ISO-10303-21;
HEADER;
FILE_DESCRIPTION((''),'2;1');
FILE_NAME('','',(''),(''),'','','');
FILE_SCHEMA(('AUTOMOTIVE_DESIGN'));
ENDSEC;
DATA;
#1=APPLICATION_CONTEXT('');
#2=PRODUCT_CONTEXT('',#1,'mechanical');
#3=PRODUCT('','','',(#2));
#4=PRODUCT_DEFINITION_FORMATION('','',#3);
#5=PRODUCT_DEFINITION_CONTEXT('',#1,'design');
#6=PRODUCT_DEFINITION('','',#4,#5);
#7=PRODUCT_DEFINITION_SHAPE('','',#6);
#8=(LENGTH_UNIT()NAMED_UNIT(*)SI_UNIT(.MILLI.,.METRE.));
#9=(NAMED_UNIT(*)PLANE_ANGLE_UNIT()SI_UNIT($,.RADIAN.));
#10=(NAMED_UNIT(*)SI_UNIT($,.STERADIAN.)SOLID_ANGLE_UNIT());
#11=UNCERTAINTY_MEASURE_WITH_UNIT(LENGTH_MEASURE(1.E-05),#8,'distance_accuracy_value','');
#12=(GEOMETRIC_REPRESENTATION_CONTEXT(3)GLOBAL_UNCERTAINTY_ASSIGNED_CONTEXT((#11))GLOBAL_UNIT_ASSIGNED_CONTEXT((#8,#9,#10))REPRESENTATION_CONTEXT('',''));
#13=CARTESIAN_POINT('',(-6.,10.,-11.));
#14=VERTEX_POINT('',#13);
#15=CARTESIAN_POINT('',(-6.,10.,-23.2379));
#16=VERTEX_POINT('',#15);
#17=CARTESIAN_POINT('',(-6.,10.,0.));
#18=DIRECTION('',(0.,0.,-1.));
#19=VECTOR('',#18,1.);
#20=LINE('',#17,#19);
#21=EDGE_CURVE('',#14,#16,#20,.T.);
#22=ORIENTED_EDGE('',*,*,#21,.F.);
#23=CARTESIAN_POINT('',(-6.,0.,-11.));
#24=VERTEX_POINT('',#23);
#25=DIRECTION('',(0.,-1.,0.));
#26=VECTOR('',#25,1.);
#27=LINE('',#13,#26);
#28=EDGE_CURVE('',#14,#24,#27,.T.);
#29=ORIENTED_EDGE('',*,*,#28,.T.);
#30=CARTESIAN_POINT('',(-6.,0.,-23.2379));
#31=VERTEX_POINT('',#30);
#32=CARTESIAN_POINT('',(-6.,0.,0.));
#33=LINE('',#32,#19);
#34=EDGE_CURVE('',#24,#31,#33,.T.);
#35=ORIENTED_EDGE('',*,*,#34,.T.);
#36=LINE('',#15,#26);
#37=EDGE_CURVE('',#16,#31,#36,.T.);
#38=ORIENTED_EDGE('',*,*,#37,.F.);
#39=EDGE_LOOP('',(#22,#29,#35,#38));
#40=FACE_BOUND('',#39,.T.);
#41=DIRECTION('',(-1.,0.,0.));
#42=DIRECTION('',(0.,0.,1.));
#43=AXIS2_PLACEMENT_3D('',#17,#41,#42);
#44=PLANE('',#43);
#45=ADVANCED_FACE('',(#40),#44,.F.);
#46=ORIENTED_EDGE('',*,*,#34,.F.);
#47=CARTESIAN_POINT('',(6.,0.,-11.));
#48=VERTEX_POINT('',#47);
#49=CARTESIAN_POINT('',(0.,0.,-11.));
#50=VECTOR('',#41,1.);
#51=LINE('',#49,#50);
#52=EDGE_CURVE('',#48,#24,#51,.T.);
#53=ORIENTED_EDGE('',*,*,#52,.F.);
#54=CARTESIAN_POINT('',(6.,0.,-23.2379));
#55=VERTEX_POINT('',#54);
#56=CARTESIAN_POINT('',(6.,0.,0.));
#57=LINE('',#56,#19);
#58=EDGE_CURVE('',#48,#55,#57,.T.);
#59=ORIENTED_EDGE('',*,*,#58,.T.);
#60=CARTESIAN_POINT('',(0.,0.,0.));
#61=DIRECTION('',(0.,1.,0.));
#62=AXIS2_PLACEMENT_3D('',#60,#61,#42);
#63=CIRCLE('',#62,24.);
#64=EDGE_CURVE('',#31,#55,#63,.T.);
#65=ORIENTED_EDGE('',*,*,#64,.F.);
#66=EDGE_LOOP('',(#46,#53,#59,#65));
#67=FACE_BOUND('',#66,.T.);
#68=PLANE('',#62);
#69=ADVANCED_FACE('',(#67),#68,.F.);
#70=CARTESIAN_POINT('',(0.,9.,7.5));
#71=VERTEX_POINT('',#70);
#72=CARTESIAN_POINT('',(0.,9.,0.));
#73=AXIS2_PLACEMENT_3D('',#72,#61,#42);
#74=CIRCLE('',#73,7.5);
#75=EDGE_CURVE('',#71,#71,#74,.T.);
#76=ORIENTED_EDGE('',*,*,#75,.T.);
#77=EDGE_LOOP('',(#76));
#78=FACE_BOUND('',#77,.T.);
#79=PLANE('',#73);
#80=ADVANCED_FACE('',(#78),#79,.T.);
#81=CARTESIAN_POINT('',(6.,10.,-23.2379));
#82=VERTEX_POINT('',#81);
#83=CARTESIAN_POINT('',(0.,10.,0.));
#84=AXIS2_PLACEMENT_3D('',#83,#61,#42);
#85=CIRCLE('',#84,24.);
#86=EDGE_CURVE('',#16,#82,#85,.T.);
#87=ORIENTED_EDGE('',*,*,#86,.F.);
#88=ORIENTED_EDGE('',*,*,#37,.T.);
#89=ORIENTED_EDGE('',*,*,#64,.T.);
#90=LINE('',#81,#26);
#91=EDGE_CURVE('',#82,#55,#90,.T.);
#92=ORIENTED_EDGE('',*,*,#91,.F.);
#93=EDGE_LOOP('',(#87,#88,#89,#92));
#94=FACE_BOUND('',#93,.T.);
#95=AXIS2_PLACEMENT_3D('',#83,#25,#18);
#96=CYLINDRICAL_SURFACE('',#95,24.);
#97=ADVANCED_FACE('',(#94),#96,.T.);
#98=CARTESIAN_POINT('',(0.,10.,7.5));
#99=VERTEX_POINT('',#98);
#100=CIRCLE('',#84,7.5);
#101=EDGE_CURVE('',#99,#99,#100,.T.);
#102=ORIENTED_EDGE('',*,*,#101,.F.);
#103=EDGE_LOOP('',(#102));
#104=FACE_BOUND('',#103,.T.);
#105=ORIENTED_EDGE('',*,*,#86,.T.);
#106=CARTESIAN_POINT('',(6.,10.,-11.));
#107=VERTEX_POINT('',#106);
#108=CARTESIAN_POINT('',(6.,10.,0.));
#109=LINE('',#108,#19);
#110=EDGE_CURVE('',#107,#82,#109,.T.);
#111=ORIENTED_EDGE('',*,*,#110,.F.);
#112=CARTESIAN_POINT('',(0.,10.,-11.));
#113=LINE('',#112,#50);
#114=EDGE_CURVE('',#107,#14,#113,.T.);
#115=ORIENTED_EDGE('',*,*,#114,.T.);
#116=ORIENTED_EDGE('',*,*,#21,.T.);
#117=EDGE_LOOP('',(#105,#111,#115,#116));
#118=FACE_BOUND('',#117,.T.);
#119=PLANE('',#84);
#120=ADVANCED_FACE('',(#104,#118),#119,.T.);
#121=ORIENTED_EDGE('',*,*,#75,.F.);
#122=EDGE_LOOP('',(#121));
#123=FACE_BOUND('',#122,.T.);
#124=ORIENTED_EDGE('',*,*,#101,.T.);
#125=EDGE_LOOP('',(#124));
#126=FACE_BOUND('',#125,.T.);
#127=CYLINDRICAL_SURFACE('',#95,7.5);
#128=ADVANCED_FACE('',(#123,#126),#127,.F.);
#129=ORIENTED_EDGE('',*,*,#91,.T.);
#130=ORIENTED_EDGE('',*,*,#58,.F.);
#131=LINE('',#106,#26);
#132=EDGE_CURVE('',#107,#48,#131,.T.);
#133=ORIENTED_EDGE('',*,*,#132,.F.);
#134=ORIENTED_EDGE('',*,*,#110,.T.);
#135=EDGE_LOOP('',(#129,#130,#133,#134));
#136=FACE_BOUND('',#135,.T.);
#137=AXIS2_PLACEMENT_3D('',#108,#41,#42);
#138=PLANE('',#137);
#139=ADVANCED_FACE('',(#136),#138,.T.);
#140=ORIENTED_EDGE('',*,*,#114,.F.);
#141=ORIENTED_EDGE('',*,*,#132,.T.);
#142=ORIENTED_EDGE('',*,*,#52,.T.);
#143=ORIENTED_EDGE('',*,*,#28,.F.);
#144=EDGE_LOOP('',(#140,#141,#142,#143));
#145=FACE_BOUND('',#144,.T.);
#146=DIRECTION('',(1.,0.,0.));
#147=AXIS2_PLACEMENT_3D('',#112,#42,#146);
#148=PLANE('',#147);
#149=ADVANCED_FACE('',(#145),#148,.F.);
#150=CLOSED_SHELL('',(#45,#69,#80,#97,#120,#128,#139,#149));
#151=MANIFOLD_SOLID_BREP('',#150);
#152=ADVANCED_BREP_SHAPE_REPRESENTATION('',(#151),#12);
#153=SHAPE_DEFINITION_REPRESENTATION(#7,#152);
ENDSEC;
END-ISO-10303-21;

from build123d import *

# Parameters (mm, degrees)
BOSS_EXTRUDE1_DEPTH = 10
BOSS_EXTRUDE2_DEPTH = 9


with BuildPart() as part:
    # Sketch1 → Boss-Extrude1 (new body)
    with BuildSketch(Plane(origin=(0, 0, 0), x_dir=(1, 0, 0), z_dir=(0, 1, 0))):
        with BuildLine():
            Line((-6, 11), (-6, 23))
            Line((-6, 23), (-6, 23.237900077))
            ThreePointArc((-6, 23.237900077), (-23.80871271, -3.02410302), (0, -24))
            ThreePointArc((0, -24), (23.80871271, -3.02410302), (6, 23.237900077))
            Line((6, 23.237900077), (6, 23))
            Line((6, 23), (6, 11))
            Line((6, 11), (-6, 11))
        make_face()
        with BuildLine():
            ThreePointArc((7.5, 0), (5.303300859, -5.303300859), (0, -7.5))
            ThreePointArc((0, -7.5), (-5.303300859, 5.303300859), (7.5, 0))
        make_face(mode=Mode.SUBTRACT)
    extrude(amount=BOSS_EXTRUDE1_DEPTH)

    # Sketch1<3> → Boss-Extrude2 (add)
    with BuildSketch(Plane(origin=(0, 0, 0), x_dir=(1, 0, 0), z_dir=(0, 1, 0))):
        with BuildLine():
            ThreePointArc((7.5, 0), (-5.303300859, 5.303300859), (0, -7.5))
            ThreePointArc((0, -7.5), (5.303300859, -5.303300859), (7.5, 0))
        make_face()
    extrude(amount=BOSS_EXTRUDE2_DEPTH)


solid = part.part
